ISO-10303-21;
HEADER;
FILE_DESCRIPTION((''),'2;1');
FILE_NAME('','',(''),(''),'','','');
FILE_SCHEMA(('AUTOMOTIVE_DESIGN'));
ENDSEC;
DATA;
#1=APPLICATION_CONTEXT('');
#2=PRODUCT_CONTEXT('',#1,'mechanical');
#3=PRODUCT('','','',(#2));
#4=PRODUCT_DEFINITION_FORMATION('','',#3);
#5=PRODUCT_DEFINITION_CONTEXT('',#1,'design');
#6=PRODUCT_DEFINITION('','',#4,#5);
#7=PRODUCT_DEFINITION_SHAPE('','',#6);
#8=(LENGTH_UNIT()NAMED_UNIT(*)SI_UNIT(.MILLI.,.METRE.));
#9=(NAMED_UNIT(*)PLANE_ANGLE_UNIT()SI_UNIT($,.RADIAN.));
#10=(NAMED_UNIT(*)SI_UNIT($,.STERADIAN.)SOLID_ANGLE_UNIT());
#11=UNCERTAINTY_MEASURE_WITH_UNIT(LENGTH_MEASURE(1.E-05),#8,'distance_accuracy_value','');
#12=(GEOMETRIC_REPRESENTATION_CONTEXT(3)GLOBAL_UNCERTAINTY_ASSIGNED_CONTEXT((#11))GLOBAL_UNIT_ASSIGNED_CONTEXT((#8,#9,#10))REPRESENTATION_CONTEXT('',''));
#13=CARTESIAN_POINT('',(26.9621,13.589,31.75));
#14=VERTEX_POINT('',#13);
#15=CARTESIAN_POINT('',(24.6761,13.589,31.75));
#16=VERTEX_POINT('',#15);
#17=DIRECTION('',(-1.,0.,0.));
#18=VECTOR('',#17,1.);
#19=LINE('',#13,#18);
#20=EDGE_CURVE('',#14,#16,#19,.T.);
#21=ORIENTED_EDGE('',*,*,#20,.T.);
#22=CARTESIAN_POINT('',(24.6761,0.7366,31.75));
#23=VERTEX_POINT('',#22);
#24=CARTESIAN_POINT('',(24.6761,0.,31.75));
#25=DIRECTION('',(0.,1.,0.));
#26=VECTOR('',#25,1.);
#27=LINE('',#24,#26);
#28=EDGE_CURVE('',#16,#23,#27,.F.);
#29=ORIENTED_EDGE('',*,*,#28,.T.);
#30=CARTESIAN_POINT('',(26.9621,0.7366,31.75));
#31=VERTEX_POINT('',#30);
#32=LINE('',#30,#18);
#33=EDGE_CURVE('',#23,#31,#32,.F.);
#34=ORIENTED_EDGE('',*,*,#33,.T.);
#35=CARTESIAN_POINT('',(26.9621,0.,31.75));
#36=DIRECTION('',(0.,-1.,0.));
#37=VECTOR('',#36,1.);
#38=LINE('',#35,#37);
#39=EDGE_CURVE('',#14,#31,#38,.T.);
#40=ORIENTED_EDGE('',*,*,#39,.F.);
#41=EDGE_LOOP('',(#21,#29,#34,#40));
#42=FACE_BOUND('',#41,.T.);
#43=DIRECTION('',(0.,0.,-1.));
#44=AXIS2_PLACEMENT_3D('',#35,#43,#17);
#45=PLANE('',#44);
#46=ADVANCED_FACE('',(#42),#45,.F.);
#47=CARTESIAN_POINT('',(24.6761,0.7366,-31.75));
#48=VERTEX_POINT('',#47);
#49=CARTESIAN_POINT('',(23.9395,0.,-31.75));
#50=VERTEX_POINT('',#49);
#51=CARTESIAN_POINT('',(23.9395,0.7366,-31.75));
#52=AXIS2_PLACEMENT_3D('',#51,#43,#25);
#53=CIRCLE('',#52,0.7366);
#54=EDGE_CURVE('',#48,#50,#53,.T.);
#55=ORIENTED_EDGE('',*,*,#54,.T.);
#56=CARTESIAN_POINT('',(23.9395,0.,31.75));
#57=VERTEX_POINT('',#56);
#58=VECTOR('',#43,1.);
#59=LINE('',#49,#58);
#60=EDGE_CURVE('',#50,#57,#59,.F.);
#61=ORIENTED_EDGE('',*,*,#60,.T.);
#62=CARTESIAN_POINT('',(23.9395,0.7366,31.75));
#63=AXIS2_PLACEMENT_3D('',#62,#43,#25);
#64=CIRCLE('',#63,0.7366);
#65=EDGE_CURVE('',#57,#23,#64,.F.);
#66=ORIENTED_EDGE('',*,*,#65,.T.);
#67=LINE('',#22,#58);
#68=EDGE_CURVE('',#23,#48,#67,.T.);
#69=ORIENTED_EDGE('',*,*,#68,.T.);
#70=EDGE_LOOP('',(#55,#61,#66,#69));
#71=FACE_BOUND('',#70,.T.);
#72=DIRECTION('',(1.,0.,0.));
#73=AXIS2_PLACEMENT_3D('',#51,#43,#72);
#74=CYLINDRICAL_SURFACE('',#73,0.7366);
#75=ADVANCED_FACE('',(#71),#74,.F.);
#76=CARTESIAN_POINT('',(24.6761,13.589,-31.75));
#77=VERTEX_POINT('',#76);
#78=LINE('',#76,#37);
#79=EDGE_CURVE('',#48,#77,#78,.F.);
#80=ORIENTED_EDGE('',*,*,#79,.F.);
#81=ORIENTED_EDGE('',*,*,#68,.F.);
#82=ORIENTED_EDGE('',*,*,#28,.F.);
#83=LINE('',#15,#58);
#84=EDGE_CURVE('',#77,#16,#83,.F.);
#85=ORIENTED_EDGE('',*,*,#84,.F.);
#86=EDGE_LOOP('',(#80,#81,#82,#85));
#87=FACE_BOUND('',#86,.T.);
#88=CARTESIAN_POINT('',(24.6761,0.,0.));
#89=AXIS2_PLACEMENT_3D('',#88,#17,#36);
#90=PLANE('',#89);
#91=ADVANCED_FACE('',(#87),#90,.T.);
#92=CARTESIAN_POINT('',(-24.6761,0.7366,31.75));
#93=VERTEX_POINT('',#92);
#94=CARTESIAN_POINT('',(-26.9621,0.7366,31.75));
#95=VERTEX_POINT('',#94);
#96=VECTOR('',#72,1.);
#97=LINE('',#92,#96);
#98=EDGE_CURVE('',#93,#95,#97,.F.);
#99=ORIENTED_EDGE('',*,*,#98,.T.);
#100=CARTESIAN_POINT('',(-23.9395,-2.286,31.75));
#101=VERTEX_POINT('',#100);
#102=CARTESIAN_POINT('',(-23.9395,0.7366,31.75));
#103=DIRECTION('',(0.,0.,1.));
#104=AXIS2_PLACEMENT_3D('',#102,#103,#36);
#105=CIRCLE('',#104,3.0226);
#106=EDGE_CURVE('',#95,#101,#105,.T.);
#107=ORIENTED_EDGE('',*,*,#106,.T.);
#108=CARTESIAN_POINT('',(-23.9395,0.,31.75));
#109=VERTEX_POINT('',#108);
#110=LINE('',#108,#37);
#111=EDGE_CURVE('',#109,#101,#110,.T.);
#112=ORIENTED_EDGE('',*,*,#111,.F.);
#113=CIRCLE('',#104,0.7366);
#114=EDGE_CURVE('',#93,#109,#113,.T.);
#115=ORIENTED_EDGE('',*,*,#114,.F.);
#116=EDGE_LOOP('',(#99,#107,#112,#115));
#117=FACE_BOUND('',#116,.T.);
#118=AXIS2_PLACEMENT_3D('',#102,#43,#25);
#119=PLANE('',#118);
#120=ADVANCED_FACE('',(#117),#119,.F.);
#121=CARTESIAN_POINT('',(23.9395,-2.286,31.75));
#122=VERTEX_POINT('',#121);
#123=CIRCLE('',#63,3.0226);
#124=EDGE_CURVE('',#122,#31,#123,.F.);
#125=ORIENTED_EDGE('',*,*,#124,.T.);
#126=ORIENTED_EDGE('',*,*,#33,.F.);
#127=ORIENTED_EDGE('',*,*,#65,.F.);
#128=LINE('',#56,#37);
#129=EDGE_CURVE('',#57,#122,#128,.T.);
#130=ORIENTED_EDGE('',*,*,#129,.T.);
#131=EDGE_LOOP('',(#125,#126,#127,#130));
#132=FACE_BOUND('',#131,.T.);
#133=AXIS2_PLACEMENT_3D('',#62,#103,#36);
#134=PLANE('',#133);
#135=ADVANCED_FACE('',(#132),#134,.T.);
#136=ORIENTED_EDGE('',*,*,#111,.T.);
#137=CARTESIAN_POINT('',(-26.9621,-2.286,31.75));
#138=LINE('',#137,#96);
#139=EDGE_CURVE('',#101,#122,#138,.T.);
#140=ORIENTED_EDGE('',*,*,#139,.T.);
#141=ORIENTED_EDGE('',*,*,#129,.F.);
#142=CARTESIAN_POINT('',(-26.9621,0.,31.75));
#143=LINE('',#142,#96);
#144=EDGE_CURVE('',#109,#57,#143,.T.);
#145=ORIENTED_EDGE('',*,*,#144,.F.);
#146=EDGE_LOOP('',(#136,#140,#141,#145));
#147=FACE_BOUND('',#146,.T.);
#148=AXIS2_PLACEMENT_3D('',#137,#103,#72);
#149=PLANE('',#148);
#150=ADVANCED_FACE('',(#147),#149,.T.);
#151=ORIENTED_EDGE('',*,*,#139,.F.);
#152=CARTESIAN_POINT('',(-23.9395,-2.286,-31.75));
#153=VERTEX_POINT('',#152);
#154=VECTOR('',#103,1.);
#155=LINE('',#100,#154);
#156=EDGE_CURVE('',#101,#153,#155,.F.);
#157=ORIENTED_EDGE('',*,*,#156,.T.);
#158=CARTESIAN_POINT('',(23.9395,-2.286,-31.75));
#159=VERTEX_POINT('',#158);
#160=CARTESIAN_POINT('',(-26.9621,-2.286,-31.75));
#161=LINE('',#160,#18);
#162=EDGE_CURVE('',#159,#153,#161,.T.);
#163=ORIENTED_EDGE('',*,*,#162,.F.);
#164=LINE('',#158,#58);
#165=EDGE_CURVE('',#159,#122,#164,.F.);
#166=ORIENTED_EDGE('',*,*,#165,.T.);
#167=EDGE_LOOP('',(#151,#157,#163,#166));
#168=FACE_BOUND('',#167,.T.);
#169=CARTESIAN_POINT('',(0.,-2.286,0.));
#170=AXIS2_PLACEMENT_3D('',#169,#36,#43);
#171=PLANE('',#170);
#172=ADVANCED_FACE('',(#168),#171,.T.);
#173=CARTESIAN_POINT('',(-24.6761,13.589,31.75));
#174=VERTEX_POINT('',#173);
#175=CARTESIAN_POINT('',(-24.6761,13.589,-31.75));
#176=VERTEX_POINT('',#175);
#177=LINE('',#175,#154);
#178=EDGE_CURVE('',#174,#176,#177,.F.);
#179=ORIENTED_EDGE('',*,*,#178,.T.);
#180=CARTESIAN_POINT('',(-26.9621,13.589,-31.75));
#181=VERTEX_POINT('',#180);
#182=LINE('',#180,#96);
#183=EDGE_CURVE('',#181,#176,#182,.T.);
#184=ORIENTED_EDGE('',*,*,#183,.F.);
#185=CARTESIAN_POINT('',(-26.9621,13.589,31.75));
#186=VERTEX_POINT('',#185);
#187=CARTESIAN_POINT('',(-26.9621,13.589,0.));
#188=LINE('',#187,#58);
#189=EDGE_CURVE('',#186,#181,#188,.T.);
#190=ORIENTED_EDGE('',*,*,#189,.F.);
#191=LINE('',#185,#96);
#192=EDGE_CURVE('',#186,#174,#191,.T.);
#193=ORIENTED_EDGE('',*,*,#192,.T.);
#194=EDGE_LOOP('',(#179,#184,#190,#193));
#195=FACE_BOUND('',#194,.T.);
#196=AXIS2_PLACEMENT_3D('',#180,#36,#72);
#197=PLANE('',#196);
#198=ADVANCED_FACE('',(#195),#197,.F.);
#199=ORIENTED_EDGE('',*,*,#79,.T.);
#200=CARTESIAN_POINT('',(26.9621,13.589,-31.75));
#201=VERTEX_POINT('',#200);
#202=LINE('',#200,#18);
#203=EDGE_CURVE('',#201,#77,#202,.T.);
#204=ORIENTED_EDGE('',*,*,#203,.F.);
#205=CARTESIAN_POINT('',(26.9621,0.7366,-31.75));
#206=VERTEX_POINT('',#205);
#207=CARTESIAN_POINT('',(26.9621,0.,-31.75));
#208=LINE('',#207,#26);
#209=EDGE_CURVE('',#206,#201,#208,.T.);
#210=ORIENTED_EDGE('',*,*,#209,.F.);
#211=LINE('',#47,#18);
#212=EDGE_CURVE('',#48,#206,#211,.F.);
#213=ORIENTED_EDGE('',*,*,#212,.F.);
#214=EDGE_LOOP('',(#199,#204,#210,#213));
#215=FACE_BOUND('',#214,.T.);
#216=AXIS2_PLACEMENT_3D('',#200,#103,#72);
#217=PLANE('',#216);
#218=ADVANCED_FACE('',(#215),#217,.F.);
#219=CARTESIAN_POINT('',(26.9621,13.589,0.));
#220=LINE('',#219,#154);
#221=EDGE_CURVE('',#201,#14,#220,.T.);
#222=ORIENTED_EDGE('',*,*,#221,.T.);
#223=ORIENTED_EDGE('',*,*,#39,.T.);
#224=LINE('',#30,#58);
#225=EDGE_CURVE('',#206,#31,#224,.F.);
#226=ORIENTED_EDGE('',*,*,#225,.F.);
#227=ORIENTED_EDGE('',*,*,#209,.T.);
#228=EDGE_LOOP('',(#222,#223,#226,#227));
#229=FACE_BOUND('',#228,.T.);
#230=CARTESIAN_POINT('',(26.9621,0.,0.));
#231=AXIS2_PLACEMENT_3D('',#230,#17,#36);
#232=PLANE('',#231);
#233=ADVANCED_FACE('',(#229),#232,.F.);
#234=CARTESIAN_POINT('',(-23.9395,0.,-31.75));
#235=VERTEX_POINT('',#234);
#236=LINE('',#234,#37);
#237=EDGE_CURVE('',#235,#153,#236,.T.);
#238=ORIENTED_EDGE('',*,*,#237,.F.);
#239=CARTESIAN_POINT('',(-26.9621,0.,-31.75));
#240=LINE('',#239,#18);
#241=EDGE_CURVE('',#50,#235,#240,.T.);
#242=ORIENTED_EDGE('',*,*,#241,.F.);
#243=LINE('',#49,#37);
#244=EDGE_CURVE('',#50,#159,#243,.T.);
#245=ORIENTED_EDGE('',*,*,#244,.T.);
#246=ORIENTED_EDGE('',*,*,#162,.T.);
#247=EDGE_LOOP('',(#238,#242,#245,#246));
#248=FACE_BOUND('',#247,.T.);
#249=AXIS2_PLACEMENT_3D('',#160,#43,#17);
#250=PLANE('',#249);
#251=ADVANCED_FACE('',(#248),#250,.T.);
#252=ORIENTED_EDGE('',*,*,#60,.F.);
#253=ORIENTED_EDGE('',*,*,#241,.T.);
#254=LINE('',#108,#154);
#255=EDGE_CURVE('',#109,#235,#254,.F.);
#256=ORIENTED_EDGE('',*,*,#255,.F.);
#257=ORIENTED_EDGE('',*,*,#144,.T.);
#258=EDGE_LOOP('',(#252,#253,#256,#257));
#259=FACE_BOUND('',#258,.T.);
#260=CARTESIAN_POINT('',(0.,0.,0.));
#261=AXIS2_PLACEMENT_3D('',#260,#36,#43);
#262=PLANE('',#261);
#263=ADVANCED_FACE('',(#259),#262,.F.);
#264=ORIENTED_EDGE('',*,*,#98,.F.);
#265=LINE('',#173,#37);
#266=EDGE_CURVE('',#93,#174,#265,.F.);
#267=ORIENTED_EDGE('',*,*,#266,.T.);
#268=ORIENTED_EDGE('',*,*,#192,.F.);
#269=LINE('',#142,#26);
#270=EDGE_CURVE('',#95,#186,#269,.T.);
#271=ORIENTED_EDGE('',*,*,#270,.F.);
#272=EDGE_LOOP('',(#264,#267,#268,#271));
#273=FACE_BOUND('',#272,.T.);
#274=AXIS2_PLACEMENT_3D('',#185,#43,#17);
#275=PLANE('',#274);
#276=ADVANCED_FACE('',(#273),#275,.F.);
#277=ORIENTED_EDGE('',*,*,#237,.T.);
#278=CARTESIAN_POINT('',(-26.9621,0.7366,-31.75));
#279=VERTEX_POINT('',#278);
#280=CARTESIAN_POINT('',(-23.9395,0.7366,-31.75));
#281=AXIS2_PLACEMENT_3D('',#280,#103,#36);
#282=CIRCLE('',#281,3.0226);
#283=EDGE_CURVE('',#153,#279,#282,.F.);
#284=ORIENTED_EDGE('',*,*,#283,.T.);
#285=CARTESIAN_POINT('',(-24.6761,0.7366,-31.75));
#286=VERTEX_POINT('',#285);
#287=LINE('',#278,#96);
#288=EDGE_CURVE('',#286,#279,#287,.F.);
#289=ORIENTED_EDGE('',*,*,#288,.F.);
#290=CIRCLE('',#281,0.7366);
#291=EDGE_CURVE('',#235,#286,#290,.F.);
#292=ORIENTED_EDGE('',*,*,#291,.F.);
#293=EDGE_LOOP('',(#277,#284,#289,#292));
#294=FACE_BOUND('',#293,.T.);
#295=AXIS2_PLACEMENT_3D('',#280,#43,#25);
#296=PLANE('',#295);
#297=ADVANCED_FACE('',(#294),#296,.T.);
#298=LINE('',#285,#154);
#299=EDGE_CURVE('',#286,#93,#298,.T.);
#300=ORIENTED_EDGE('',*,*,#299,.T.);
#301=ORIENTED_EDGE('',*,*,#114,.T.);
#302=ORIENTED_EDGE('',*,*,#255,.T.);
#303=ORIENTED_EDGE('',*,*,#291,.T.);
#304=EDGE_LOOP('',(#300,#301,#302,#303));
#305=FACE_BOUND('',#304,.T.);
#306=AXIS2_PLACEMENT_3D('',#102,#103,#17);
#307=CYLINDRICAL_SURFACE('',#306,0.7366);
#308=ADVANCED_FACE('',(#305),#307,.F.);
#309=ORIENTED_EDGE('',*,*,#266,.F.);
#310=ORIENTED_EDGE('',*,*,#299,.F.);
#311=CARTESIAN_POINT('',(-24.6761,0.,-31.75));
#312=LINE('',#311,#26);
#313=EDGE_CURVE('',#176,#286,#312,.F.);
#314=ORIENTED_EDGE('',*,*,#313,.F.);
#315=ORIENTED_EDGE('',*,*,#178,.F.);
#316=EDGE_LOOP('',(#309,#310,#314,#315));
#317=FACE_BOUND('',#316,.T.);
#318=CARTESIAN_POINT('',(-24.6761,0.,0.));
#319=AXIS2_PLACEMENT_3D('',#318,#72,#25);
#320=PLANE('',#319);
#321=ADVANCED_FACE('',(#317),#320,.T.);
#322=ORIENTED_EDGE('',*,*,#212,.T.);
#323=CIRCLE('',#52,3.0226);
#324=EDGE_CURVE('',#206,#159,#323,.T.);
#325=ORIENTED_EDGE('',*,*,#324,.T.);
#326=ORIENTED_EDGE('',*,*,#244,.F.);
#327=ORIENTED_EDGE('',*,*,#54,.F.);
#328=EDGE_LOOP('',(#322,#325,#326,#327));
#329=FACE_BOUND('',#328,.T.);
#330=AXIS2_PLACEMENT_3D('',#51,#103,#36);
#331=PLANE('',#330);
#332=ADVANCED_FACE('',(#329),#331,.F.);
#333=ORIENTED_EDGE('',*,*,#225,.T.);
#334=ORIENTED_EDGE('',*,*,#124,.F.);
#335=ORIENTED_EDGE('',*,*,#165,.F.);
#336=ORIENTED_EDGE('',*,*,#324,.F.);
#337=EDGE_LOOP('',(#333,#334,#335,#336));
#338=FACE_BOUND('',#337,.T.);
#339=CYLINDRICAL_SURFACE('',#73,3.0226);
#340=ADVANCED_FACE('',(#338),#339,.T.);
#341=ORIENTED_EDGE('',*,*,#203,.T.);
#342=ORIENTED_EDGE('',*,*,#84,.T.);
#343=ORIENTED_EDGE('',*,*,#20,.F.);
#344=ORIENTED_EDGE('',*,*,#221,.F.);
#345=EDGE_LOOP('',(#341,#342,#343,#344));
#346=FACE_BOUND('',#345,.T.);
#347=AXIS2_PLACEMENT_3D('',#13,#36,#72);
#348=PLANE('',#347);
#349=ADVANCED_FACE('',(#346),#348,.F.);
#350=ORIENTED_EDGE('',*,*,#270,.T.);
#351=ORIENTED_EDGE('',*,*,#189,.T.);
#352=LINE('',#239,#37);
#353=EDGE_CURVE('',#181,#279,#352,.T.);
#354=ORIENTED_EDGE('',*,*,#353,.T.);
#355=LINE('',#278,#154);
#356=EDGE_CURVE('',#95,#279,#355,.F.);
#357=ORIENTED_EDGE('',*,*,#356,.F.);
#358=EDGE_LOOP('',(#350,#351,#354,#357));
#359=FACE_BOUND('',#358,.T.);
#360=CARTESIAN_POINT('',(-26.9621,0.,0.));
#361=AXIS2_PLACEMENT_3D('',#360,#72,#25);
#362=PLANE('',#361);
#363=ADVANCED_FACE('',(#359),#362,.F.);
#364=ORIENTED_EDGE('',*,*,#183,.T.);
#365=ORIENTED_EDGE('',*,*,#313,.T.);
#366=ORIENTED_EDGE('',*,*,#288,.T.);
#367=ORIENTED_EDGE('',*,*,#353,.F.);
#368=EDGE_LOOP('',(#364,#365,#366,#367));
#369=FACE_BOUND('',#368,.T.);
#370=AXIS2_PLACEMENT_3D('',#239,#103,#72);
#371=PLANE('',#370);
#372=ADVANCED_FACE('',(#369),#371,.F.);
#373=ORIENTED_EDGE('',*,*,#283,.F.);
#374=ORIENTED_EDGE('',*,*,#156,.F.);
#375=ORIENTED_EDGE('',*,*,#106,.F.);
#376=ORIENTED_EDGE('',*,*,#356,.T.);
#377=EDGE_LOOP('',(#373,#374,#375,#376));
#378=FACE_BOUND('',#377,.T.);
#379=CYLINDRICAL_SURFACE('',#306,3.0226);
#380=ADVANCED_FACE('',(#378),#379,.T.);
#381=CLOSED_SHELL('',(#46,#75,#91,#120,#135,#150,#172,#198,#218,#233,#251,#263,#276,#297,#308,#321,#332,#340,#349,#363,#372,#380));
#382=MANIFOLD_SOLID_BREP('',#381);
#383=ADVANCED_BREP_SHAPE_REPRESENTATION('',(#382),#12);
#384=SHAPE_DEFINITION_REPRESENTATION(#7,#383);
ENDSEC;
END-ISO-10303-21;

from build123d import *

# Parameters (mm, degrees)
SKETCH1_W                      = 53.9242
SKETCH1_H                      = 63.5
BASE_FLANGE2_DEPTH             = 2.286
EDGE_FLANGE1_STRIP_W           = 10.6172
EDGE_FLANGE1_STRIP_H           = 2.286
EDGE_FLANGE1_STRIP_CUT_DEPTH   = 63.5
EDGE_FLANGE1_STRIP_2_W         = 10.6172
EDGE_FLANGE1_STRIP_2_H         = 2.286
EDGE_FLANGE1_STRIP_CUT_2_DEPTH = 63.5
EDGE_FLANGE1_DEPTH             = 63.5
EDGE_FLANGE1_BEND_DEPTH        = 63.5


# Sheet-metal steps are written as plain solids
with BuildPart() as part:
    # Sketch1 → Base-Flange2 (new body)
    with BuildSketch(Plane(origin=(0, 0, 0), x_dir=(1, 0, 0), z_dir=(0, 1, 0))):
        Rectangle(SKETCH1_W, SKETCH1_H)
    extrude(amount=-BASE_FLANGE2_DEPTH)

    # Edge-Flange1 strip (across the edge) → Edge-Flange1 strip cut (cut)
    with BuildSketch(Plane(origin=(-26.9621, 0, -31.75), x_dir=(1, 0, 0), z_dir=(0, 0, 1))):
        with Locations((-2.286, -1.143)):
            Rectangle(EDGE_FLANGE1_STRIP_W, EDGE_FLANGE1_STRIP_H)
    extrude(amount=EDGE_FLANGE1_STRIP_CUT_DEPTH, mode=Mode.SUBTRACT)

    # Edge-Flange1 strip 2 (across the edge) → Edge-Flange1 strip cut 2 (cut)
    with BuildSketch(Plane(origin=(26.9621, 0, 31.75), x_dir=(-1, 0, 0), z_dir=(0, 0, -1))):
        with Locations((-2.286, -1.143)):
            Rectangle(EDGE_FLANGE1_STRIP_2_W, EDGE_FLANGE1_STRIP_2_H)
    extrude(amount=EDGE_FLANGE1_STRIP_CUT_2_DEPTH, mode=Mode.SUBTRACT)

    # Edge-Flange1 section (across the edge) → Edge-Flange1 (add)
    with BuildSketch(Plane(origin=(-26.9621, 0, -31.75), x_dir=(1, 0, 0), z_dir=(0, 0, 1))):
        with BuildLine():
            Line((0, 0.7366), (0, 13.589))
            Line((0, 13.589), (2.286, 13.589))
            Line((2.286, 13.589), (2.286, 0.7366))
            ThreePointArc((2.286, 0.7366), (2.501745145, 0.215745145), (3.0226, 0))
            Line((3.0226, 0), (3.0226, -2.286))
            ThreePointArc((3.0226, -2.286), (0.885299043, -1.400700957), (0, 0.7366))
        make_face()
    extrude(amount=EDGE_FLANGE1_DEPTH)

    # Edge-Flange1 section 2 (across the edge) → Edge-Flange1 bend (add)
    with BuildSketch(Plane(origin=(26.9621, 0, 31.75), x_dir=(-1, 0, 0), z_dir=(0, 0, -1))):
        with BuildLine():
            Line((0, 0.7366), (0, 13.589))
            Line((0, 13.589), (2.286, 13.589))
            Line((2.286, 13.589), (2.286, 0.7366))
            ThreePointArc((2.286, 0.7366), (2.501745145, 0.215745145), (3.0226, 0))
            Line((3.0226, 0), (3.0226, -2.286))
            ThreePointArc((3.0226, -2.286), (0.885299043, -1.400700957), (0, 0.7366))
        make_face()
    extrude(amount=EDGE_FLANGE1_BEND_DEPTH)


solid = part.part
